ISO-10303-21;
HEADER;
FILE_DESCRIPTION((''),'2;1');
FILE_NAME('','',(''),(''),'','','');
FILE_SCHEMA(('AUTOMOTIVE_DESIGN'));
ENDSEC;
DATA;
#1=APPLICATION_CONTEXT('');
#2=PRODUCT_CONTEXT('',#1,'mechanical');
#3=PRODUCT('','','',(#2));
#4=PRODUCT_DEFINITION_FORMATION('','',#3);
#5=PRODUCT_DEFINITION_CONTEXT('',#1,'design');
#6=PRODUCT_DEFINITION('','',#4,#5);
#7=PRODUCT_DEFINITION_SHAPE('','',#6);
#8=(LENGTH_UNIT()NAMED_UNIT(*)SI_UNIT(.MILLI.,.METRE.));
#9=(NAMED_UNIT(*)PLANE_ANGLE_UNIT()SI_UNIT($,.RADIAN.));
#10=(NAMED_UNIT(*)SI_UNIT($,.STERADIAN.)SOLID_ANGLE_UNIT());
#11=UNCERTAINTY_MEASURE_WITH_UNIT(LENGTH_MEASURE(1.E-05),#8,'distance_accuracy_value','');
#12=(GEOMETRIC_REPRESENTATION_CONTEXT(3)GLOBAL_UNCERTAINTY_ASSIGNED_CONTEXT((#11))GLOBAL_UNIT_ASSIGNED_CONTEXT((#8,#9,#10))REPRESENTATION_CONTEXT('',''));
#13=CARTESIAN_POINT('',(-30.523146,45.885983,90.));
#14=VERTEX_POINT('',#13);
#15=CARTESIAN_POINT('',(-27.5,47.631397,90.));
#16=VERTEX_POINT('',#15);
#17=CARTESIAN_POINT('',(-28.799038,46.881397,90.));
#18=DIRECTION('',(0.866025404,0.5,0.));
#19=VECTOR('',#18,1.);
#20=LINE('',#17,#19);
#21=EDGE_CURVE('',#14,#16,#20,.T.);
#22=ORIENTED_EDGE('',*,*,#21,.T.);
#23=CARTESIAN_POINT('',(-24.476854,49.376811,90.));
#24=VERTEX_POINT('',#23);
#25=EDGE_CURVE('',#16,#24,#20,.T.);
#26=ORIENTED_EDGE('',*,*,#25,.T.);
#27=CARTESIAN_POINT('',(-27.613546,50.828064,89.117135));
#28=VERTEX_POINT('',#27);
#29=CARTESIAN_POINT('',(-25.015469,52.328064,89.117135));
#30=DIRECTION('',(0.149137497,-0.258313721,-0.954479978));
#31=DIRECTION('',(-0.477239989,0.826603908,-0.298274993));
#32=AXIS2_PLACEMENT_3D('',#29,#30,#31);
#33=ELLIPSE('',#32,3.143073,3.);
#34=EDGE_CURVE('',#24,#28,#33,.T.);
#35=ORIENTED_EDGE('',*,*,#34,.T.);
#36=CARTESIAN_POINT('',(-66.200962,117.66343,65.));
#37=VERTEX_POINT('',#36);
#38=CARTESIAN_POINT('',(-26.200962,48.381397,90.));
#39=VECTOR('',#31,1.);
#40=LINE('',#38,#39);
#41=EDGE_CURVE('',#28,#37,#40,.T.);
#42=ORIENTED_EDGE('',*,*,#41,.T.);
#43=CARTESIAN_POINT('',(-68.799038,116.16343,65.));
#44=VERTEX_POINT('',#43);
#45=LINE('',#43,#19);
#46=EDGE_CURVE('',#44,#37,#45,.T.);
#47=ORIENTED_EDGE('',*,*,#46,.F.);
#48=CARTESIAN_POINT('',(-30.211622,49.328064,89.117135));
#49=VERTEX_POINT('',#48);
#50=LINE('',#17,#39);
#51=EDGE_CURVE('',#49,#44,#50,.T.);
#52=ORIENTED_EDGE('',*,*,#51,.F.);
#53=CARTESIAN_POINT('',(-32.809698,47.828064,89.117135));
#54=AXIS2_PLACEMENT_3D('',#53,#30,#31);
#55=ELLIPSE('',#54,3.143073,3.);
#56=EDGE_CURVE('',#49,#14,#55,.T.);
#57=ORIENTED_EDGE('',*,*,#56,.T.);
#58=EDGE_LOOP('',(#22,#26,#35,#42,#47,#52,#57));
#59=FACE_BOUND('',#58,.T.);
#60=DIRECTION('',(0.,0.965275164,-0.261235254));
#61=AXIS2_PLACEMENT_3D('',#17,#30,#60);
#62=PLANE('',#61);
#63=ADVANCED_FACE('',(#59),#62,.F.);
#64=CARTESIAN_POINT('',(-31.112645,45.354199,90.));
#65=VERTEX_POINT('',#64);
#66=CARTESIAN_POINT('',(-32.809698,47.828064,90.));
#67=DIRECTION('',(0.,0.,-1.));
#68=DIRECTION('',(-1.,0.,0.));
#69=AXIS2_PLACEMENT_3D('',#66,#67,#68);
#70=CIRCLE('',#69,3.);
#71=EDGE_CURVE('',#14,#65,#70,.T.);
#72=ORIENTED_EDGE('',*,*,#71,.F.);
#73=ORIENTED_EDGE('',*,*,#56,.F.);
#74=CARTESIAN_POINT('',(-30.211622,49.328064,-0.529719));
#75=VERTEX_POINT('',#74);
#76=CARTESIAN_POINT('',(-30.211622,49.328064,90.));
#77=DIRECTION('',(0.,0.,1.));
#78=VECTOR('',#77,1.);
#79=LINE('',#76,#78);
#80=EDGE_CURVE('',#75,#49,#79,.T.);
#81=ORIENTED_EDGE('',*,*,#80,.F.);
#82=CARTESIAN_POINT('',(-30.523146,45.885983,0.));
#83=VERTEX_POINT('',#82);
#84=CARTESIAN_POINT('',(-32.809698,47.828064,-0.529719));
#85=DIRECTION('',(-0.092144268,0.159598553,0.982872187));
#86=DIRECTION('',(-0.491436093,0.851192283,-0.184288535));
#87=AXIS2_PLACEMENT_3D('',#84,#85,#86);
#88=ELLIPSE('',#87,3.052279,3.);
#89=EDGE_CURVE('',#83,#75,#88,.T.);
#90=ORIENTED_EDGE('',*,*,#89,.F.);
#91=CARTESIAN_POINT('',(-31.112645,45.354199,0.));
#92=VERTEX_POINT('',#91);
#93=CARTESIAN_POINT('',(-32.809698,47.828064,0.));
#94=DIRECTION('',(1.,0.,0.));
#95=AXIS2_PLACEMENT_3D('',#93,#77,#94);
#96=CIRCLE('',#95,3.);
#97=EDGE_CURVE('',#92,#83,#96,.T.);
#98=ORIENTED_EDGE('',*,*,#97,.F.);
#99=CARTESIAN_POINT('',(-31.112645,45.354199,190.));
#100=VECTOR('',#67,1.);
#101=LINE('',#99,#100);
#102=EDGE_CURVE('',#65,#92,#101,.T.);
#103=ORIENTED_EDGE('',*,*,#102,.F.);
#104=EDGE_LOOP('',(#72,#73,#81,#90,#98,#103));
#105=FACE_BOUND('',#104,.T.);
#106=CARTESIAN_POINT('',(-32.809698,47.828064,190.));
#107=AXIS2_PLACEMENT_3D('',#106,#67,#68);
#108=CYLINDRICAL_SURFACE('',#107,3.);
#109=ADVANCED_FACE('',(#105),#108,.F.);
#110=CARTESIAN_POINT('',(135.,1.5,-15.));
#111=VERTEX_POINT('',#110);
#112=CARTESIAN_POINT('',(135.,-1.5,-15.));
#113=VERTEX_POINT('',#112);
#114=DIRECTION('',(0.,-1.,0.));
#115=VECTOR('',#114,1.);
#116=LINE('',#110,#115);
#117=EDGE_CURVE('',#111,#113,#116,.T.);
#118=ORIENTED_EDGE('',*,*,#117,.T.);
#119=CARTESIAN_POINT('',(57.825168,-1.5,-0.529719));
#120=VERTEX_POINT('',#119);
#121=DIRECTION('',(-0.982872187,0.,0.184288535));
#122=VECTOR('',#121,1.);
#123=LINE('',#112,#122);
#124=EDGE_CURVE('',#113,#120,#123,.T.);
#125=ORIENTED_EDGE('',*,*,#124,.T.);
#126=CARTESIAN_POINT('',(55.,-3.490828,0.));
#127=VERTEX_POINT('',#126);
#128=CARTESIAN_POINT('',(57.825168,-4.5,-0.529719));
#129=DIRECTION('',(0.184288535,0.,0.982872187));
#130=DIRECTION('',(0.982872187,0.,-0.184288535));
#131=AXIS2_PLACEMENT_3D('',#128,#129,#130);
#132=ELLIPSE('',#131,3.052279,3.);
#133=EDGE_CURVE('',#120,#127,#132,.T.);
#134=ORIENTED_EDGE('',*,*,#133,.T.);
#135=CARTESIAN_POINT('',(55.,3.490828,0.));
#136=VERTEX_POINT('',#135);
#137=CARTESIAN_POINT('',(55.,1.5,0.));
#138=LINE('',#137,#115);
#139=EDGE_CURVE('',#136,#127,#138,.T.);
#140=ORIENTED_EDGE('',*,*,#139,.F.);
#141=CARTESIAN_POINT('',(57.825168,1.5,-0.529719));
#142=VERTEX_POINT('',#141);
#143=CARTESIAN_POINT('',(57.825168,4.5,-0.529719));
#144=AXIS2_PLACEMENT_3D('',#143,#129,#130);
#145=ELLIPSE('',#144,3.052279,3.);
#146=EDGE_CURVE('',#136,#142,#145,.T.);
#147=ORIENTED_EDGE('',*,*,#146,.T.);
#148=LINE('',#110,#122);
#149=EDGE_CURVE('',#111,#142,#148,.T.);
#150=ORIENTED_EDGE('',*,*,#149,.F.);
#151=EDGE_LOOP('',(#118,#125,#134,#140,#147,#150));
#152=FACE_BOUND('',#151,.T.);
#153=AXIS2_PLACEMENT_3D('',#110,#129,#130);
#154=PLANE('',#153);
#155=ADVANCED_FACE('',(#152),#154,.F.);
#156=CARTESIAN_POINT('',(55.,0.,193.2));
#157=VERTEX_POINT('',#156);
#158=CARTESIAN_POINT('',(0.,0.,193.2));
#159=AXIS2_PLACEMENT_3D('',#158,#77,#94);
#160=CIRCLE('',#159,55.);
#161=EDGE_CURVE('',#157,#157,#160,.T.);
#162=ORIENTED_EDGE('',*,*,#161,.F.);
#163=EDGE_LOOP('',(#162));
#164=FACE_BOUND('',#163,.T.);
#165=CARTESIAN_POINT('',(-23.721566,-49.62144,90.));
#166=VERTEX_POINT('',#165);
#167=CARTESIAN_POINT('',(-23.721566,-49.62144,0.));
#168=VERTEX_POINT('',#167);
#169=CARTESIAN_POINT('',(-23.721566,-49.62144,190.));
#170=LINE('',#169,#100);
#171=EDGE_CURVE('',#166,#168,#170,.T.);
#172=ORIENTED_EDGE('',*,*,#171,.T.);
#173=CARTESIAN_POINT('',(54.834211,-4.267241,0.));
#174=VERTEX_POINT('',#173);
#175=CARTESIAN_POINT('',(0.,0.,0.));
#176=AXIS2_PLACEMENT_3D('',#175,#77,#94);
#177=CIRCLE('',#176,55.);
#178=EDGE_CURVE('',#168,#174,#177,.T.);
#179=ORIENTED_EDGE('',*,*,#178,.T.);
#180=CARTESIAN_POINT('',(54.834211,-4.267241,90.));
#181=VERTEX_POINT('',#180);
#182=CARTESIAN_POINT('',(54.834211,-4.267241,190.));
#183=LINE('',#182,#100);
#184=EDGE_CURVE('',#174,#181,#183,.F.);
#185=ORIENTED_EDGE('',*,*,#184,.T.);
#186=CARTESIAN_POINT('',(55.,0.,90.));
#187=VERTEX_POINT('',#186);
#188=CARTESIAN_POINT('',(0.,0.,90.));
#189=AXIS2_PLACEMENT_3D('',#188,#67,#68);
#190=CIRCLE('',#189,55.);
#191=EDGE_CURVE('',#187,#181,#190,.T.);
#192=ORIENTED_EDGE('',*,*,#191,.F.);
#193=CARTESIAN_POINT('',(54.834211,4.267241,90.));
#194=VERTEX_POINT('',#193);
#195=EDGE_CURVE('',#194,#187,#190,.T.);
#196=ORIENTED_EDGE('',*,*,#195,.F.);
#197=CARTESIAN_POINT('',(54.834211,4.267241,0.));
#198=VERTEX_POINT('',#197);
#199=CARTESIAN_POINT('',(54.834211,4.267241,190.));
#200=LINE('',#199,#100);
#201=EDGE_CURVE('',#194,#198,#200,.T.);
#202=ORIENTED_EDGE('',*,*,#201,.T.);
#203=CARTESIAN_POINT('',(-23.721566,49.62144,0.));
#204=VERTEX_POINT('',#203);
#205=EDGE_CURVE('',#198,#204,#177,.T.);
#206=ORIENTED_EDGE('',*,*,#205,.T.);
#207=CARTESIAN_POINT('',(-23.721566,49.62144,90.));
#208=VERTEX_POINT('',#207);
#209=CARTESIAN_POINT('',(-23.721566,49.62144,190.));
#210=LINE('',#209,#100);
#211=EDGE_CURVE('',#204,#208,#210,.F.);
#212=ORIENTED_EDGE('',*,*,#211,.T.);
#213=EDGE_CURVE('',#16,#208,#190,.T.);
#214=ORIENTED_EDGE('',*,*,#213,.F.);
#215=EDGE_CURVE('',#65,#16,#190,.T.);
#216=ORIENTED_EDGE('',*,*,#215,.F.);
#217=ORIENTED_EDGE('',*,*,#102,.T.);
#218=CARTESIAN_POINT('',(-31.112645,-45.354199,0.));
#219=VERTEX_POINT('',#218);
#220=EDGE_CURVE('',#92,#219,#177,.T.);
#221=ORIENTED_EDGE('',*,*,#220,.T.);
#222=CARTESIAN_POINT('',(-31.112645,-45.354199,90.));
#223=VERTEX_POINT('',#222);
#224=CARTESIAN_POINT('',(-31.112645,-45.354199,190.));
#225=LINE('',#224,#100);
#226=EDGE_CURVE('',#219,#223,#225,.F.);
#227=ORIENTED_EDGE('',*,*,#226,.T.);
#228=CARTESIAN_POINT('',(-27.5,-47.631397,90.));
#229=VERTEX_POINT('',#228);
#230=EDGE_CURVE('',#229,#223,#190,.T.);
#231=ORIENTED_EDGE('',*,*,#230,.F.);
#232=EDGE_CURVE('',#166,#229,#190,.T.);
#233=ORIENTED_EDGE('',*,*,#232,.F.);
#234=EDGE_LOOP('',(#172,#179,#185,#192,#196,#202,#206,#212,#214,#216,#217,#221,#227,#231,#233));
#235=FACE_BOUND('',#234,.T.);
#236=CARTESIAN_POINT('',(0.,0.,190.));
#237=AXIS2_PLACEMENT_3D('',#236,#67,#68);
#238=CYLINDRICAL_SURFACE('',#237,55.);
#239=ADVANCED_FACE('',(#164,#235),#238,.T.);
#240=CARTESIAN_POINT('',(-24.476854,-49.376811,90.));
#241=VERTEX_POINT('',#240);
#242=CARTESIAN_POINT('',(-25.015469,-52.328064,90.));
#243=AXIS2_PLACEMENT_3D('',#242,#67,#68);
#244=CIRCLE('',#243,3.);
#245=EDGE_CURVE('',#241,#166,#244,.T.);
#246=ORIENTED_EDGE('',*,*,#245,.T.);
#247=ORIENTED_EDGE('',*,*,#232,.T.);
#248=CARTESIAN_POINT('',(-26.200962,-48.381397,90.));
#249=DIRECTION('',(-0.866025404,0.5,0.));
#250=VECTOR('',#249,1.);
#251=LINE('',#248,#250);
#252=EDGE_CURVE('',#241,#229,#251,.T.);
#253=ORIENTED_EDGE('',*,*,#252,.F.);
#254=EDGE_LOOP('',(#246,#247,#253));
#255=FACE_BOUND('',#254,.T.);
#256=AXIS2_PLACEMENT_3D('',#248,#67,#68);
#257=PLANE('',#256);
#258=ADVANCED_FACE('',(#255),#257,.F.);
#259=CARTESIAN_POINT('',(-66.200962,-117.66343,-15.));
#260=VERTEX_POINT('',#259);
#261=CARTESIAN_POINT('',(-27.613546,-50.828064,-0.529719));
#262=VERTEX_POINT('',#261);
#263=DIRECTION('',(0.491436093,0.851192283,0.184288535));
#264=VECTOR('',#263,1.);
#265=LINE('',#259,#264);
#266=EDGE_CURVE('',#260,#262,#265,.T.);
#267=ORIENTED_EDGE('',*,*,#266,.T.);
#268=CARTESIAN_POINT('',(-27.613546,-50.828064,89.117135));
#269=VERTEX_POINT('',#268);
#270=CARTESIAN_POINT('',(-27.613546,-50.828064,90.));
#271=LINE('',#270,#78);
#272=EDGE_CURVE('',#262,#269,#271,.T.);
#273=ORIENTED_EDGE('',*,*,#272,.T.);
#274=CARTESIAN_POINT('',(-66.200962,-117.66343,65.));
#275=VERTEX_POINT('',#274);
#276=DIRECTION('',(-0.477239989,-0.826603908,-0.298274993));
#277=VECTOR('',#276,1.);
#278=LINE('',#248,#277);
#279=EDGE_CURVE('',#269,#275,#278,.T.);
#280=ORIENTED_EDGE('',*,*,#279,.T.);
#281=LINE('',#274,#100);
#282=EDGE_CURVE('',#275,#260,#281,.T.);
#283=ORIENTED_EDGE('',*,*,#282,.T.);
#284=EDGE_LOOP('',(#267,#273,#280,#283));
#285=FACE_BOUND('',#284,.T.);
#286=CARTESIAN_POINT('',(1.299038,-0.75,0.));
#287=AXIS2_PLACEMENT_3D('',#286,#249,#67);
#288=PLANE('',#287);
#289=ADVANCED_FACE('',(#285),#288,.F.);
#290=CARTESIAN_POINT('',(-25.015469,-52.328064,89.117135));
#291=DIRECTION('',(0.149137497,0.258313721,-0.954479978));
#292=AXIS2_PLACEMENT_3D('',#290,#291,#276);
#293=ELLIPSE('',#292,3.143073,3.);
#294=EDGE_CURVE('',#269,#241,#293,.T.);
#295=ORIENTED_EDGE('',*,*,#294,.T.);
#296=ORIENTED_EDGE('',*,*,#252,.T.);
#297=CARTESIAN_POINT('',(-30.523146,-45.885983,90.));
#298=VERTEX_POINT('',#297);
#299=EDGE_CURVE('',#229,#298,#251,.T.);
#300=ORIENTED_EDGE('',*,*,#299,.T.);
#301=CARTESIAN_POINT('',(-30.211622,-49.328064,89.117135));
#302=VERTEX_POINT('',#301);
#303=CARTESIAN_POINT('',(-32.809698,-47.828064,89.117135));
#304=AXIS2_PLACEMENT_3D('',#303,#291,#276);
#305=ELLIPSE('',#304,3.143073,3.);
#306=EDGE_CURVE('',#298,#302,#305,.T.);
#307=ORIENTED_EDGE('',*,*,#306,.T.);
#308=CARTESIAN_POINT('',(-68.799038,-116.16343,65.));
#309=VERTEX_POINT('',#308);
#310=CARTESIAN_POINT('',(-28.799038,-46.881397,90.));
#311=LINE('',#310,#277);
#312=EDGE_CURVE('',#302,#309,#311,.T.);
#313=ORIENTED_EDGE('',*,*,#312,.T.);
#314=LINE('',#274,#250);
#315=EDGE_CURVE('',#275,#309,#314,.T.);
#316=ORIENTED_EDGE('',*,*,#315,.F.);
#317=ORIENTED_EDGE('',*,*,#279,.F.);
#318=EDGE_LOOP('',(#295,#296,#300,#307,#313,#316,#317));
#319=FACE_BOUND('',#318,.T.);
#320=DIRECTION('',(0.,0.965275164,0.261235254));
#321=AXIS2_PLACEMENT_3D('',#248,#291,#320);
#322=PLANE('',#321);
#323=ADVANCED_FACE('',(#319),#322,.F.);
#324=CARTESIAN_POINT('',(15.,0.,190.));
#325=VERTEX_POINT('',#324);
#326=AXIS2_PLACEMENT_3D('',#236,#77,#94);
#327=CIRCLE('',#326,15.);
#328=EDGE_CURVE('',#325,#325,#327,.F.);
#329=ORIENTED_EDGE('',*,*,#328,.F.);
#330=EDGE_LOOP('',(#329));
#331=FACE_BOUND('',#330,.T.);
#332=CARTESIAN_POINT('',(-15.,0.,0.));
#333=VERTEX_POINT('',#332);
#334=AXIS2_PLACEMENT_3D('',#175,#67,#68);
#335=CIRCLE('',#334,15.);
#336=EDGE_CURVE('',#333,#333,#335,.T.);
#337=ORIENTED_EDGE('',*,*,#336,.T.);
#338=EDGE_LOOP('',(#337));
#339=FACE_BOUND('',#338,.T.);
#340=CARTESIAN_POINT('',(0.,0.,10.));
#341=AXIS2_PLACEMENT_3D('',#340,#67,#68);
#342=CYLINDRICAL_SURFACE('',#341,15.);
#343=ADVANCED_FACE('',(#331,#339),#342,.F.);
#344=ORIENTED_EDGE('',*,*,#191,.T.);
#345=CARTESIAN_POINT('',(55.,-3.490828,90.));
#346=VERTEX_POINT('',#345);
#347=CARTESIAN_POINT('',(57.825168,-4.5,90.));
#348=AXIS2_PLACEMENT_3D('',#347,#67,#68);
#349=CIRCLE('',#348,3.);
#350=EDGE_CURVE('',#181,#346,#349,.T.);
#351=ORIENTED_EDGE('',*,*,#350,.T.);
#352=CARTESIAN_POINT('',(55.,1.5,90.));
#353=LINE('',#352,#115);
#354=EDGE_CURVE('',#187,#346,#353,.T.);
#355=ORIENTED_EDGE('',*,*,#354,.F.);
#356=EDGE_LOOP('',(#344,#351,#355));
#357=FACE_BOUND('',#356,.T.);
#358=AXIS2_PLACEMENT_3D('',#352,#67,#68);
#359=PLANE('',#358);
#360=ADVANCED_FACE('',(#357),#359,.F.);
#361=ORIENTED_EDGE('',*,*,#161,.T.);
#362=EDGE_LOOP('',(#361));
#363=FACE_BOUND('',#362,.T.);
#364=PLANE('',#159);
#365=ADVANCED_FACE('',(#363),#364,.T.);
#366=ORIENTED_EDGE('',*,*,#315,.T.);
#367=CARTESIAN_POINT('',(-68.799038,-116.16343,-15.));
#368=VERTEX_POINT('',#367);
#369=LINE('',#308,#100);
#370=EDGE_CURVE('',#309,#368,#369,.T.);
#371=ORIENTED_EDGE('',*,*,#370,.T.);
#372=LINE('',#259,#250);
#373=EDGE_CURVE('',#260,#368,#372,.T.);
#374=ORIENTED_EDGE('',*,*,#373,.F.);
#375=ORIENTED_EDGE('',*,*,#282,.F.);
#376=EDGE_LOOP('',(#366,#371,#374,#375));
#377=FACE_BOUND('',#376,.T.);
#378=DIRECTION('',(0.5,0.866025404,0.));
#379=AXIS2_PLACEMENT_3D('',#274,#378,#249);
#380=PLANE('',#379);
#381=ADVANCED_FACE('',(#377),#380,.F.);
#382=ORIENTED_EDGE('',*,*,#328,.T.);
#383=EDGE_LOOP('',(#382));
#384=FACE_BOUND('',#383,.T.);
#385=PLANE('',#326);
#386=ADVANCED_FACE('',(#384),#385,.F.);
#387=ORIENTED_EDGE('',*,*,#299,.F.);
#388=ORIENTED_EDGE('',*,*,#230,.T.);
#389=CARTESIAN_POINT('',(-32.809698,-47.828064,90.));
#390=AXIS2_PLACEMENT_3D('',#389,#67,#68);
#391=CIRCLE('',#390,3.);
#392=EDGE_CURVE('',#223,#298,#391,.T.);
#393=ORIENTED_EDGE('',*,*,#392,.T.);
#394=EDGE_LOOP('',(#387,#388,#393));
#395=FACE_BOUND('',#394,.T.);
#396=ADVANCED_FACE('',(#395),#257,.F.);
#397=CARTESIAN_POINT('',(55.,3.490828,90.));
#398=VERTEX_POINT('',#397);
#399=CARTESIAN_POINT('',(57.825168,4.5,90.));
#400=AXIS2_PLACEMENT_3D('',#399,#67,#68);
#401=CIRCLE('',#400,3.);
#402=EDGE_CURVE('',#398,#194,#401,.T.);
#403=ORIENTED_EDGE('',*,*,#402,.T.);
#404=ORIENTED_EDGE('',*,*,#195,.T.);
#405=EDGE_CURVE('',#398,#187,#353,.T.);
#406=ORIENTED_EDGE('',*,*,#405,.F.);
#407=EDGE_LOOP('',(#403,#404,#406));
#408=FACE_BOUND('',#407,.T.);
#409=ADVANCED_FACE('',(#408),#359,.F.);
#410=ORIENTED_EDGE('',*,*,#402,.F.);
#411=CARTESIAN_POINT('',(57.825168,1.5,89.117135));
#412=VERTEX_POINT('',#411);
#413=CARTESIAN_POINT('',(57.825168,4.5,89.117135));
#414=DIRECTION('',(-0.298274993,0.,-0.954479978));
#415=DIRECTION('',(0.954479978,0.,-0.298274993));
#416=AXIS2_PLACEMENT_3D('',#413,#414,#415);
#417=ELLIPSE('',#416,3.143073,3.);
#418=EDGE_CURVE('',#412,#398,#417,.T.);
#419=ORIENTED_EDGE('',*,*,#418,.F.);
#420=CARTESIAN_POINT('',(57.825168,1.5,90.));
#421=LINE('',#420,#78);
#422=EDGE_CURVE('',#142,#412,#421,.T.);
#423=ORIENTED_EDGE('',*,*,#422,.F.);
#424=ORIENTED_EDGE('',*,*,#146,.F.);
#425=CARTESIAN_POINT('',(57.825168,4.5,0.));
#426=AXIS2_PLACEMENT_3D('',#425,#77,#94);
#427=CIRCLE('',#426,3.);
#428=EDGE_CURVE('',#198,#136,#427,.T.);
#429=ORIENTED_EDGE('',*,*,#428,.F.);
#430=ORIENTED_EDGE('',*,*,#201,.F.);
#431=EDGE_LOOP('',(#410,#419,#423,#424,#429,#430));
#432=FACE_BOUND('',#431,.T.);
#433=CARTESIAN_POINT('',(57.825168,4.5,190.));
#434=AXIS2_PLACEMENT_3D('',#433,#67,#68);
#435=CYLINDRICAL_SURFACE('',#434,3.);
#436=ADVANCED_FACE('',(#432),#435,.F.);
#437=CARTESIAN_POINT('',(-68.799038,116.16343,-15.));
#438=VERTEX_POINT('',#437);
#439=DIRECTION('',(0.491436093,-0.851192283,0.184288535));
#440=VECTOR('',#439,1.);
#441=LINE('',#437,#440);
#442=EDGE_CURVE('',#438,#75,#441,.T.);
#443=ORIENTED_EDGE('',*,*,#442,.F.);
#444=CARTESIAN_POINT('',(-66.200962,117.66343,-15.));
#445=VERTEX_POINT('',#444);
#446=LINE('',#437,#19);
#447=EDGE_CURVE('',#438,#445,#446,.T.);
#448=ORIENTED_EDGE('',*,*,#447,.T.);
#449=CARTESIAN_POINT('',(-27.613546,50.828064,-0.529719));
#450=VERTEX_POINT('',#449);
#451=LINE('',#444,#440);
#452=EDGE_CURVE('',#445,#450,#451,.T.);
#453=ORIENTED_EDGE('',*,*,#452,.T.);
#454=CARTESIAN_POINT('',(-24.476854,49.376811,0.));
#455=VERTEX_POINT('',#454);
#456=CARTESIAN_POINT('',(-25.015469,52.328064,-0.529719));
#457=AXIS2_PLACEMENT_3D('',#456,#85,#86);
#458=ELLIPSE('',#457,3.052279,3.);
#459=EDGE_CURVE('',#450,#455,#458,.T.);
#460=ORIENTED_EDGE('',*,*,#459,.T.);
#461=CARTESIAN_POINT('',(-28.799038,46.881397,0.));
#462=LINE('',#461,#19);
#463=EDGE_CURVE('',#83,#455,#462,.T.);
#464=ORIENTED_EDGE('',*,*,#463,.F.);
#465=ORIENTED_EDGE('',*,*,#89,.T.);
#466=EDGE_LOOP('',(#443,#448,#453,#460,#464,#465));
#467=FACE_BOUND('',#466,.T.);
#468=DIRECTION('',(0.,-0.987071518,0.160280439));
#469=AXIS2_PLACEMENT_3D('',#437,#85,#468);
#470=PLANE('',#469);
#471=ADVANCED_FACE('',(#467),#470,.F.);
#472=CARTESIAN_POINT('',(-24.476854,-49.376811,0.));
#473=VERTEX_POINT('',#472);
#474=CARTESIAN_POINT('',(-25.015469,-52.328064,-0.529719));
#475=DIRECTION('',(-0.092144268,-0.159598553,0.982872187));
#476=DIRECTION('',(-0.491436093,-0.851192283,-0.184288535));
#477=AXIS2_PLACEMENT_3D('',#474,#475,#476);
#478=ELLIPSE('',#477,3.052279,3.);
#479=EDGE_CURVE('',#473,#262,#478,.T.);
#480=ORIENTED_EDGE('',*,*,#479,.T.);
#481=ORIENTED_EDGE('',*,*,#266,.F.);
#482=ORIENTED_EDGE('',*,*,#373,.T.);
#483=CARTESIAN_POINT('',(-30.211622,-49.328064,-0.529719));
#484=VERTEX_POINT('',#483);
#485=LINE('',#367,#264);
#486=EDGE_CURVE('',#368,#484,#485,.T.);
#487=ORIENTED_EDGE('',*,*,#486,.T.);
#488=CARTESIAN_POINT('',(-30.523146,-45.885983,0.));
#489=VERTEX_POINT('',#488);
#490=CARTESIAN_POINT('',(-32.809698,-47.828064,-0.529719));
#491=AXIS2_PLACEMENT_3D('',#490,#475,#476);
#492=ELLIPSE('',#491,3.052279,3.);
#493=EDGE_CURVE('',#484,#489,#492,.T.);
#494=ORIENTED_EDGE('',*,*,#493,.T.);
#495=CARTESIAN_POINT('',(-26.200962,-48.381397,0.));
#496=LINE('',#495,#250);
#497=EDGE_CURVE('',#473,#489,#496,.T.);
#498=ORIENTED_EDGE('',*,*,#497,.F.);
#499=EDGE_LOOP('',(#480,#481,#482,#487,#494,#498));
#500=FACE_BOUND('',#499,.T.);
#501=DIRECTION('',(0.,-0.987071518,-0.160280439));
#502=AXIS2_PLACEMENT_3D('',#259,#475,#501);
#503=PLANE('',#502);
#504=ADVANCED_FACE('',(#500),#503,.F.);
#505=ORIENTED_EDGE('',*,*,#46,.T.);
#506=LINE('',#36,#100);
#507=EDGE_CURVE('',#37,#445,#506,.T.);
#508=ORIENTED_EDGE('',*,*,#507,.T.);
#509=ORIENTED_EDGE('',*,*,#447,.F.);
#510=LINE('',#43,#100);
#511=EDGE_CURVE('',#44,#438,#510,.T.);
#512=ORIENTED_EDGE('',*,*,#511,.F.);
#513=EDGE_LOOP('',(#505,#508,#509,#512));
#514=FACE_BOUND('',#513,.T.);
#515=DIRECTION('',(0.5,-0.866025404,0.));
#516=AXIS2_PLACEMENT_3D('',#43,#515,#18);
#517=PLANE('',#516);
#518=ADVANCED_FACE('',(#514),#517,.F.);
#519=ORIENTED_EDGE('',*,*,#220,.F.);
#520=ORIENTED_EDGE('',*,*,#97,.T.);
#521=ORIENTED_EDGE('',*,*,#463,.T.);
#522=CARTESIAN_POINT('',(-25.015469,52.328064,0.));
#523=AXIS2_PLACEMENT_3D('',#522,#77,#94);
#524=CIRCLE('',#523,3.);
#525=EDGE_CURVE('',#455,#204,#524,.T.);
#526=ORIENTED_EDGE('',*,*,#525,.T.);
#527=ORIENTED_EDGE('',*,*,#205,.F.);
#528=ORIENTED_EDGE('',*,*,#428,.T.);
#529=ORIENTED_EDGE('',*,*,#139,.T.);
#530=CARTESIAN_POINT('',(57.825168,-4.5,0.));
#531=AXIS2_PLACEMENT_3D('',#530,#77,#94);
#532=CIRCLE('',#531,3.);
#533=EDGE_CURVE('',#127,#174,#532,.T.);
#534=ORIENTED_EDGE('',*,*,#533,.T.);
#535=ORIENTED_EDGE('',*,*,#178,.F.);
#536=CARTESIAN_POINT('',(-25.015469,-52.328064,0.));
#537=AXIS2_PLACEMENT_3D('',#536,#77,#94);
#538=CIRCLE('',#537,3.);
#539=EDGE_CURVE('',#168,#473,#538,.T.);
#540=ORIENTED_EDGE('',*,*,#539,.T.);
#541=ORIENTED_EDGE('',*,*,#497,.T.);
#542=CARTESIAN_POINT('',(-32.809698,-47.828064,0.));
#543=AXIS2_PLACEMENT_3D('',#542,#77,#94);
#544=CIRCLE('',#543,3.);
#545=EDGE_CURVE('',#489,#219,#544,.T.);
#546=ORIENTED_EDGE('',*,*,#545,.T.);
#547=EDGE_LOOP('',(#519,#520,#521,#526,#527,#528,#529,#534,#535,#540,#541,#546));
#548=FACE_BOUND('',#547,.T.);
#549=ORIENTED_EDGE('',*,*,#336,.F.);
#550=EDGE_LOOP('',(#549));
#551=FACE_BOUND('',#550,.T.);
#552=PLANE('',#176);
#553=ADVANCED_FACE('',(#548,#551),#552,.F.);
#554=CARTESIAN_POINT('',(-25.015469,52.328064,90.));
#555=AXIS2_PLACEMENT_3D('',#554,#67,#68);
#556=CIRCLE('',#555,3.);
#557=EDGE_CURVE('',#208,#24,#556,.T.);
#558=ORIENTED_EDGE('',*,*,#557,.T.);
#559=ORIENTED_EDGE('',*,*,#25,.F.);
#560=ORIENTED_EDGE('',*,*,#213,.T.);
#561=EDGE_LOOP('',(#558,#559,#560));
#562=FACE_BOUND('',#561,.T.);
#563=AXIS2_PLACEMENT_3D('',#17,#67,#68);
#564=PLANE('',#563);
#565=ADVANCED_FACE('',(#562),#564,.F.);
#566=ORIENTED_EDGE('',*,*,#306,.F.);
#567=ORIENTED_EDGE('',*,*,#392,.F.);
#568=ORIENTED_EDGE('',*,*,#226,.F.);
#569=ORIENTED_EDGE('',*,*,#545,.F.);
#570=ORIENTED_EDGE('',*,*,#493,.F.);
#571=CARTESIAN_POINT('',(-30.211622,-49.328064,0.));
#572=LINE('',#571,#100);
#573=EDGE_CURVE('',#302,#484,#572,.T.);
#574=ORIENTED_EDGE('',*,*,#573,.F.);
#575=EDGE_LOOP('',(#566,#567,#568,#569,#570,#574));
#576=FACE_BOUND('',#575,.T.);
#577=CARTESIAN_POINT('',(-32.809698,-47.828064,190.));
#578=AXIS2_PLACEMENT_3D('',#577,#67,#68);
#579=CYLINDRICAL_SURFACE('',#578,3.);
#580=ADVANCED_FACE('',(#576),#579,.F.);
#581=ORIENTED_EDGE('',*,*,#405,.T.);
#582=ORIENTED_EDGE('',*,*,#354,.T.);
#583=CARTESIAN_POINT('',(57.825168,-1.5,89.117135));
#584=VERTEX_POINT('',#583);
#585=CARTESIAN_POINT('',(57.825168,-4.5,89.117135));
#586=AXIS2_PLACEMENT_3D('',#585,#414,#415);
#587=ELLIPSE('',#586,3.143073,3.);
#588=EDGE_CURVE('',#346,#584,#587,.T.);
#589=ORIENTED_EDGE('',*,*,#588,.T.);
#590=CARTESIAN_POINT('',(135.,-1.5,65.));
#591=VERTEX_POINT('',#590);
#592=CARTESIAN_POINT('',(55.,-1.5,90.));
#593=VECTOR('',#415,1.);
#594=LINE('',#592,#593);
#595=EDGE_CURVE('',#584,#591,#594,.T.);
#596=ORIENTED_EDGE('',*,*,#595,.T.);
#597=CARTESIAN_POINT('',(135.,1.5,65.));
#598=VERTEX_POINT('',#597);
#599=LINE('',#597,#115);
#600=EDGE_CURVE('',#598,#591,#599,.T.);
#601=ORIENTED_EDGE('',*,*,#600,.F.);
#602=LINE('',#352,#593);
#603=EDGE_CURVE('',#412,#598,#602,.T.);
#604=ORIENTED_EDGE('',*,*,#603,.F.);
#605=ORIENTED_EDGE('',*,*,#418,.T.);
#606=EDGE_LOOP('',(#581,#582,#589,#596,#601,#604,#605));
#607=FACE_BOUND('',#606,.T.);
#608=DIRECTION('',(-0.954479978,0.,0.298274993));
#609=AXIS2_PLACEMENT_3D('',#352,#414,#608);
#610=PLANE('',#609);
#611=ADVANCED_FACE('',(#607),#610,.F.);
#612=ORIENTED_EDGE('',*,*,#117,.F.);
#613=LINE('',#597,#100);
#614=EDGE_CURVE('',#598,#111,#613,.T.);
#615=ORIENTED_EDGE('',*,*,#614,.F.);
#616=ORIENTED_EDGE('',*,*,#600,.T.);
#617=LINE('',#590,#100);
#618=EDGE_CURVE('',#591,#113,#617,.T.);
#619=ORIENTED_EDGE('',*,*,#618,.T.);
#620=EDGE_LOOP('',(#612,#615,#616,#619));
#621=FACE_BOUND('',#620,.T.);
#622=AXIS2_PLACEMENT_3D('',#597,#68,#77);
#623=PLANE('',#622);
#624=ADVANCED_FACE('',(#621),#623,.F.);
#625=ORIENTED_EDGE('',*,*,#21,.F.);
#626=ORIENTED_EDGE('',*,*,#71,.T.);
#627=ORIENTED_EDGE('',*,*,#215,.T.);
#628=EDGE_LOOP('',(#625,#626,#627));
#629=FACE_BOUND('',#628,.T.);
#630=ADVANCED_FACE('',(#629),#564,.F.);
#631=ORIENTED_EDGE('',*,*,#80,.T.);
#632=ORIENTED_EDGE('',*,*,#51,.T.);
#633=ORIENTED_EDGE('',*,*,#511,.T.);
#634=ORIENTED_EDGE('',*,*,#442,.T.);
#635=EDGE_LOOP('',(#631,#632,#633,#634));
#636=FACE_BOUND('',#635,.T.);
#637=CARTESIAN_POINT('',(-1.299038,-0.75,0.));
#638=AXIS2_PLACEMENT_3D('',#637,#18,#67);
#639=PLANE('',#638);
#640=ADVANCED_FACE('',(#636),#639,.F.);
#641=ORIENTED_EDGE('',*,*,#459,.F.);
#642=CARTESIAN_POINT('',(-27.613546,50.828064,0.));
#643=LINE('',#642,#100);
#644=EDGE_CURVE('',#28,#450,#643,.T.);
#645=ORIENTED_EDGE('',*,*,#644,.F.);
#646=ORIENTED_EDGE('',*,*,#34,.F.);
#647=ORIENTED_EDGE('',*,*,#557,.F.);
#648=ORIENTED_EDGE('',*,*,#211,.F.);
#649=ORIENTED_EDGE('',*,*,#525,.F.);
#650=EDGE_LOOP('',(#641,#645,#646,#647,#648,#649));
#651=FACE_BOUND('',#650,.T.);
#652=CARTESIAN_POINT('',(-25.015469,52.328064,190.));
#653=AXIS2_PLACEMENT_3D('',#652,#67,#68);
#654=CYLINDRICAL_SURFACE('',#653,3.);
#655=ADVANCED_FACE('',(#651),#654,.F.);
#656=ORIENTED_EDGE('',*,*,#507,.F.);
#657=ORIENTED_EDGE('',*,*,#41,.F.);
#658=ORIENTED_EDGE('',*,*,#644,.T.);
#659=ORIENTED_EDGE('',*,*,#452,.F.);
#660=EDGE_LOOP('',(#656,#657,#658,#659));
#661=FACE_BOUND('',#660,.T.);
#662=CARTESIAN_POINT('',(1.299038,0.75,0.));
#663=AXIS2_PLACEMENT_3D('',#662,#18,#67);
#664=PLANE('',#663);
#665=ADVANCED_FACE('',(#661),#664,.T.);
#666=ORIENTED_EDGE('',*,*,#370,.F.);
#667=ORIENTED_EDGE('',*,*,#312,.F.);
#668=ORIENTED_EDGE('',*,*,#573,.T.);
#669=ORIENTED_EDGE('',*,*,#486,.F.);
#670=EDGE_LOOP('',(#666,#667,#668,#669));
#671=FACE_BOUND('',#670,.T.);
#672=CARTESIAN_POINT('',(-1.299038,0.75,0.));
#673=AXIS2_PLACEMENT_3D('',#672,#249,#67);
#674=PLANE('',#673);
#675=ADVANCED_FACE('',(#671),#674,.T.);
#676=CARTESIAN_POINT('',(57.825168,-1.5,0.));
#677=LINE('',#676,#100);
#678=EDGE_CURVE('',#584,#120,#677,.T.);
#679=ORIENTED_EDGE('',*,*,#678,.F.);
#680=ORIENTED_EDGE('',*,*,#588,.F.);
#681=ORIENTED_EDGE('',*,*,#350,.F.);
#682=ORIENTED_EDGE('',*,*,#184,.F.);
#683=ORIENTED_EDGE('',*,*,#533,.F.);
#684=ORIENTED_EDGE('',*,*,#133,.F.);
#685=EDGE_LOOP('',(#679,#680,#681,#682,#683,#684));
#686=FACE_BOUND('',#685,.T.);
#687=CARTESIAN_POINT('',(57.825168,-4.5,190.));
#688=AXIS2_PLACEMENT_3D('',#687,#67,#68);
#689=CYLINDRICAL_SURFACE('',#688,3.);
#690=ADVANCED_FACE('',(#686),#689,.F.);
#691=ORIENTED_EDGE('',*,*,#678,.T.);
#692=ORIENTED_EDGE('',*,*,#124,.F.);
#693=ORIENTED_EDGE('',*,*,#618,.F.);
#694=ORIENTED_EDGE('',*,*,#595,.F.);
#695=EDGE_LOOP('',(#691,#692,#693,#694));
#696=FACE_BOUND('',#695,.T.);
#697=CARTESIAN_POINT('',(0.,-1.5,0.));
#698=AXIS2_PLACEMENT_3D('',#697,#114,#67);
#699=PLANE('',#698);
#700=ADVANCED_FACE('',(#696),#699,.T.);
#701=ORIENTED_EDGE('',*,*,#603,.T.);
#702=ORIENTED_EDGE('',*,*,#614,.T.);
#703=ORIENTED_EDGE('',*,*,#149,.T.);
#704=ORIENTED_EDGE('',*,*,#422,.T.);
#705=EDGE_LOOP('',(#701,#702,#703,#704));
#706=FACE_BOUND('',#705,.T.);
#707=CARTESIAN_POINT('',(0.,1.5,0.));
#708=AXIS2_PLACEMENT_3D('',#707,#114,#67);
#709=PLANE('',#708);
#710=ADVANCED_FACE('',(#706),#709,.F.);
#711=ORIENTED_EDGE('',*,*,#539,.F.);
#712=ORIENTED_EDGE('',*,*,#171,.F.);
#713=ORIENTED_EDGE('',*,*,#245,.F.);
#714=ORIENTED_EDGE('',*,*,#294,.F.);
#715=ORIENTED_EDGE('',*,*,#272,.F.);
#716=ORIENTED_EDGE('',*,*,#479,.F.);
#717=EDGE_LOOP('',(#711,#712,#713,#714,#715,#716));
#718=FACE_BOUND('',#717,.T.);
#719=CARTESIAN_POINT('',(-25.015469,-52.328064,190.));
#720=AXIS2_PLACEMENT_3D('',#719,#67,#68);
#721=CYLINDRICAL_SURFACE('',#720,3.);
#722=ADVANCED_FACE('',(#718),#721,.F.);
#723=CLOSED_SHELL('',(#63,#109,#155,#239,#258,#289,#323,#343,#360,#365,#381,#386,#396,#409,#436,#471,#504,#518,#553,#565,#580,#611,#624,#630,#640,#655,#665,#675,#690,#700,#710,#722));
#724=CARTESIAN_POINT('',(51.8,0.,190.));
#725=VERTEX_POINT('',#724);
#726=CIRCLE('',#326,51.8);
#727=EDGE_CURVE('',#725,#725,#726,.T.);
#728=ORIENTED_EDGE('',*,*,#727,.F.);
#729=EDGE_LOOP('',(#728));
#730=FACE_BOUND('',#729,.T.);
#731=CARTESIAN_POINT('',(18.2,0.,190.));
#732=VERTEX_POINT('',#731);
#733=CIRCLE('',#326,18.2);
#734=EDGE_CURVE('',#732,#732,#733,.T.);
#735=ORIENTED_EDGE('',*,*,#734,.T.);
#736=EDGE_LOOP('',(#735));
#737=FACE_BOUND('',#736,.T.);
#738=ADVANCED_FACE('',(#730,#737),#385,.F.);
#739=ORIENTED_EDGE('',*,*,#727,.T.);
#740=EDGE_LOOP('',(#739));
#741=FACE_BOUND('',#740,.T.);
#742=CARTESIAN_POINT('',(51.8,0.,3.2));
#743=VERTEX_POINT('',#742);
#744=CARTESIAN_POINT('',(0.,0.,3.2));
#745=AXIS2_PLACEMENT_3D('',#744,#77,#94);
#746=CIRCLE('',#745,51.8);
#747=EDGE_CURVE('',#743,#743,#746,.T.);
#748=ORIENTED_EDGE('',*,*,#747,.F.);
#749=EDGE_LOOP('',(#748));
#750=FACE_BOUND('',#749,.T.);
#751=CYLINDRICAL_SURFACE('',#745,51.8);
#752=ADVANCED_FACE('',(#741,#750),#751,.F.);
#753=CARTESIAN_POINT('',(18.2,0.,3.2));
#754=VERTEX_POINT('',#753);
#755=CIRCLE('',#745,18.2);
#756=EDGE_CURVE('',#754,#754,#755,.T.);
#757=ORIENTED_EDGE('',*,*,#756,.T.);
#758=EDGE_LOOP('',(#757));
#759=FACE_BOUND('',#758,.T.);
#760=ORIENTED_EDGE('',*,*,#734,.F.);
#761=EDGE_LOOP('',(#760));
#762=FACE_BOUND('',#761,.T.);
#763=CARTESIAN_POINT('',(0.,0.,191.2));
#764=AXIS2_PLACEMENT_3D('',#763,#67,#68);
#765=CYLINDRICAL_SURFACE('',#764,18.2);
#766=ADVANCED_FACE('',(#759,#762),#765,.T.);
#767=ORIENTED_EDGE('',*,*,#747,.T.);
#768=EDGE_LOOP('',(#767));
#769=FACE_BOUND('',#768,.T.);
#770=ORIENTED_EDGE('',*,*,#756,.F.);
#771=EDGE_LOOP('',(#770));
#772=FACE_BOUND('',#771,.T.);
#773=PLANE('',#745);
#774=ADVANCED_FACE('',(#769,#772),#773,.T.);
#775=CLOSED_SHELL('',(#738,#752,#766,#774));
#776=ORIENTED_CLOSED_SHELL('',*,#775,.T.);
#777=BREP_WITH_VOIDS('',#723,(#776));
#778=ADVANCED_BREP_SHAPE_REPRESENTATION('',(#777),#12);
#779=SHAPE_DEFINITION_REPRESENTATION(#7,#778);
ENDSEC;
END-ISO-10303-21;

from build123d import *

# Parameters (mm, degrees)
SKETCH_1_R               = 55
EXTRUDE_1_DEPTH          = 190
SKETCH_2_R               = 51.8
CUT_EXTRUDE_1_DEPTH      = 186.8
SKETCH_3_R               = 15
CUT_EXTRUDE_2_DEPTH      = 10
SKETCH_4_R               = 18.2
SKETCH_4_R_2             = 15
EXTRUDE_2_DEPTH          = 188
SKETCH_5_R               = 55
EXTRUDE_5_DEPTH          = 3.2
EXTRUDE_6_DEPTH          = 1.5
PATTERN_CIRCULAR_1_COUNT = 3
FILLET_1_R               = 3


with BuildPart() as part:
    # 草图1 → 凸台-拉伸1 (new body)
    with BuildSketch(Plane.XY):
        Circle(SKETCH_1_R)
    extrude(amount=EXTRUDE_1_DEPTH)

    # 草图2 → 切除-拉伸1 (cut)
    with BuildSketch(Plane.XY.offset(190)):
        Circle(SKETCH_2_R)
    extrude(amount=-CUT_EXTRUDE_1_DEPTH, mode=Mode.SUBTRACT)

    # 草图3 → 切除-拉伸2 (cut)
    with BuildSketch(Plane(origin=(0, 0, 0), x_dir=(-1, 0, 0), z_dir=(0, 0, -1))):
        Circle(SKETCH_3_R)
    extrude(amount=-CUT_EXTRUDE_2_DEPTH, mode=Mode.SUBTRACT)

    # 草图4 → 凸台-拉伸2 (add)
    with BuildSketch(Plane.XY.offset(3.2)):
        Circle(SKETCH_4_R)
        with Locations(Location((0, 0, 0), (0, 0, 180))):
            Circle(SKETCH_4_R_2, mode=Mode.SUBTRACT)
    extrude(amount=EXTRUDE_2_DEPTH)

    # 草图5 → 凸台-拉伸5 (add)
    with BuildSketch(Plane.XY.offset(190)):
        Circle(SKETCH_5_R)
    extrude(amount=EXTRUDE_5_DEPTH)

    # 草图8 → 凸台-拉伸6 (add, symmetric)
    with BuildSketch(Plane(origin=(0, 0, 0), x_dir=(-1, 0, 0), z_dir=(0, 1, 0))):
        Polygon((-55, 90), (-135, 65), (-135, -15), (-55, 0), (-53, 0), (-53, 90), align=None)
    extrude_6 = extrude(amount=EXTRUDE_6_DEPTH, both=True)

    # 阵列(圆周)1: 凸台-拉伸6 ×3 about axis
    pattern_circular_1_axis = Axis((0, 0, 0), (0, 0, 1))
    for i in range(1, PATTERN_CIRCULAR_1_COUNT):
        add(extrude_6.rotate(pattern_circular_1_axis, i * 360 / PATTERN_CIRCULAR_1_COUNT))

    # 圆角1
    # the kernel refuses this fillet: 3 mm, written as the material it adds along each edge
    with BuildSketch(Plane(origin=(-28.78880893, -46.863679757, 90), x_dir=(-0.5000000000000001, -0.8660254037844386, 0), z_dir=(0, 0, -1))) as fillet_1_piece_1_section:
        with BuildLine():
            CenterArc((2.845625882, 3), FILLET_1_R, 184.449834226, 85.550165774)
            ThreePointArc((-0.14533106, 2.767241379), (-0.055235086, 1.384536108), (0, 0))
            Line((0, 0), (2.845625882, 0))
        make_face()
    fillet_1_piece_1 = extrude(amount=90, mode=Mode.PRIVATE)
    fillet_1_piece_1 = split(fillet_1_piece_1, bisect_by=Plane(origin=(-36.031072916, -58.160902251, 85.817388964), z_dir=(0.14913749656797354, 0.25831372136935893, -0.9544799780350298)), keep=Keep.TOP, mode=Mode.PRIVATE)
    fillet_1_piece_1 = split(fillet_1_piece_1, bisect_by=Plane(origin=(-25.561501862, -40.027073251, 1.416522524), z_dir=(-0.09214426752509275, -0.15959855297967937, 0.982872186934322)), keep=Keep.TOP, mode=Mode.PRIVATE)
    add(fillet_1_piece_1)
    with BuildSketch(Plane(origin=(-28.78880893, -46.863679757, 90), x_dir=(-0.5000000000000001, -0.8660254037844386, 0), z_dir=(0, 0, -1))) as fillet_1_piece_2_section:
        with BuildLine():
            CenterArc((2.845625882, 3), FILLET_1_R, 184.449834226, 85.550165774)
            ThreePointArc((-0.14533106, 2.767241379), (-0.055235086, 1.384536108), (0, 0))
            Line((0, 0), (2.845625882, 0))
        make_face()
    fillet_1_piece_2 = extrude(amount=90, mode=Mode.PRIVATE)
    fillet_1_piece_2 = split(fillet_1_piece_2, bisect_by=Plane(origin=(-30.206894917, -45.938881036, 0.021058977), z_dir=(0.09214426752509275, 0.15959855297967937, -0.982872186934322)), keep=Keep.TOP, mode=Mode.PRIVATE)
    add(fillet_1_piece_2)
    with BuildSketch(Plane(origin=(-28.78880893, -46.863679757, 90), x_dir=(-0.5000000000000001, -0.8660254037844386, 0), z_dir=(0, 0, -1))) as fillet_1_piece_3_section:
        with BuildLine():
            CenterArc((2.845625882, 3), FILLET_1_R, 184.449834226, 85.550165774)
            ThreePointArc((-0.14533106, 2.767241379), (-0.055235086, 1.384536108), (0, 0))
            Line((0, 0), (2.845625882, 0))
        make_face()
    fillet_1_piece_3 = extrude(amount=97.114064704, mode=Mode.PRIVATE)
    fillet_1_piece_3 = split(fillet_1_piece_3, bisect_by=Plane(origin=(-29.644971354, -47.826469744, 0), z_dir=(0, 0, -1)), keep=Keep.TOP, mode=Mode.PRIVATE)
    fillet_1_piece_3 = split(fillet_1_piece_3, bisect_by=Plane(origin=(-29.634430967, -47.808213257, -0.228814251), z_dir=(-0.09214426752509275, -0.15959855297967937, 0.982872186934322)), keep=Keep.TOP, mode=Mode.PRIVATE)
    add(fillet_1_piece_3)
    with BuildSketch(Plane(origin=(-26.190732719, -48.363679757, 90), x_dir=(-0.5000000000000023, -0.8660254037844373, 0), z_dir=(0, 0, -1))) as fillet_1_piece_4_section:
        with BuildLine():
            CenterArc((2.845625882, -3), FILLET_1_R, 90, 85.550165774)
            ThreePointArc((-0.14533106, -2.767241379), (-0.055235086, -1.384536108), (0, 0))
            Line((0, 0), (2.845625882, 0))
        make_face()
    fillet_1_piece_4 = extrude(amount=90, mode=Mode.PRIVATE)
    fillet_1_piece_4 = split(fillet_1_piece_4, bisect_by=Plane(origin=(-21.883711344, -42.150446597, 1.416522524), z_dir=(-0.09214426752509275, -0.15959855297967937, 0.982872186934322)), keep=Keep.TOP, mode=Mode.PRIVATE)
    fillet_1_piece_4 = split(fillet_1_piece_4, bisect_by=Plane(origin=(-32.353282398, -60.284275597, 85.817388964), z_dir=(0.14913749656797354, 0.25831372136935893, -0.9544799780350298)), keep=Keep.TOP, mode=Mode.PRIVATE)
    add(fillet_1_piece_4)
    with BuildSketch(Plane(origin=(-26.190732719, -48.363679757, 90), x_dir=(-0.5000000000000023, -0.8660254037844373, 0), z_dir=(0, 0, -1))) as fillet_1_piece_5_section:
        with BuildLine():
            CenterArc((2.845625882, -3), FILLET_1_R, 90, 85.550165774)
            ThreePointArc((-0.14533106, -2.767241379), (-0.055235086, -1.384536108), (0, 0))
            Line((0, 0), (2.845625882, 0))
        make_face()
    fillet_1_piece_5 = extrude(amount=90, mode=Mode.PRIVATE)
    fillet_1_piece_5 = split(fillet_1_piece_5, bisect_by=Plane(origin=(-24.68079054, -49.129378886, 0.021058977), z_dir=(0.09214426752509275, 0.15959855297967937, -0.982872186934322)), keep=Keep.TOP, mode=Mode.PRIVATE)
    add(fillet_1_piece_5)
    with BuildSketch(Plane(origin=(-26.190732719, -48.363679757, 90), x_dir=(-0.5000000000000023, -0.8660254037844373, 0), z_dir=(0, 0, -1))) as fillet_1_piece_6_section:
        with BuildLine():
            CenterArc((2.845625882, -3), FILLET_1_R, 90, 85.550165774)
            ThreePointArc((-0.14533106, -2.767241379), (-0.055235086, -1.384536108), (0, 0))
            Line((0, 0), (2.845625882, 0))
        make_face()
    fillet_1_piece_6 = extrude(amount=97.114064704, mode=Mode.PRIVATE)
    fillet_1_piece_6 = split(fillet_1_piece_6, bisect_by=Plane(origin=(-26.596452095, -49.58653316, 0), z_dir=(0, 0, -1)), keep=Keep.TOP, mode=Mode.PRIVATE)
    fillet_1_piece_6 = split(fillet_1_piece_6, bisect_by=Plane(origin=(-26.585911707, -49.568276672, -0.228814251), z_dir=(-0.09214426752509275, -0.15959855297967937, 0.982872186934322)), keep=Keep.TOP, mode=Mode.PRIVATE)
    add(fillet_1_piece_6)
    with BuildSketch(Plane(origin=(54.97954165, -1.5, 90), x_dir=(1, 0, 0), z_dir=(0, 0, -1))) as fillet_1_piece_7_section:
        with BuildLine():
            CenterArc((2.845625882, 3), FILLET_1_R, 184.449834226, 85.550165774)
            ThreePointArc((-0.14533106, 2.767241379), (-0.055235086, 1.384536108), (0, 0))
            Line((0, 0), (2.845625882, 0))
        make_face()
    fillet_1_piece_7 = extrude(amount=90, mode=Mode.PRIVATE)
    fillet_1_piece_7 = split(fillet_1_piece_7, bisect_by=Plane(origin=(47.445213206, -2.123373346, 1.416522524), z_dir=(0.1842885350501853, 0, 0.9828721869343219)), keep=Keep.TOP, mode=Mode.PRIVATE)
    fillet_1_piece_7 = split(fillet_1_piece_7, bisect_by=Plane(origin=(68.384355315, -2.123373346, 85.817388964), z_dir=(-0.2982749931359468, 0, -0.9544799780350298)), keep=Keep.TOP, mode=Mode.PRIVATE)
    add(fillet_1_piece_7)
    with BuildSketch(Plane(origin=(54.97954165, -1.5, 90), x_dir=(1, 0, 0), z_dir=(0, 0, -1))) as fillet_1_piece_8_section:
        with BuildLine():
            CenterArc((2.845625882, 3), FILLET_1_R, 184.449834226, 85.550165774)
            ThreePointArc((-0.14533106, 2.767241379), (-0.055235086, 1.384536108), (0, 0))
            Line((0, 0), (2.845625882, 0))
        make_face()
    fillet_1_piece_8 = extrude(amount=90, mode=Mode.PRIVATE)
    fillet_1_piece_8 = split(fillet_1_piece_8, bisect_by=Plane(origin=(54.887685457, -3.19049785, 0.021058977), z_dir=(-0.1842885350501853, 0, -0.9828721869343219)), keep=Keep.TOP, mode=Mode.PRIVATE)
    add(fillet_1_piece_8)
    with BuildSketch(Plane(origin=(54.97954165, -1.5, 90), x_dir=(1, 0, 0), z_dir=(0, 0, -1))) as fillet_1_piece_9_section:
        with BuildLine():
            CenterArc((2.845625882, 3), FILLET_1_R, 184.449834226, 85.550165774)
            ThreePointArc((-0.14533106, 2.767241379), (-0.055235086, 1.384536108), (0, 0))
            Line((0, 0), (2.845625882, 0))
        make_face()
    fillet_1_piece_9 = extrude(amount=97.114064704, mode=Mode.PRIVATE)
    fillet_1_piece_9 = split(fillet_1_piece_9, bisect_by=Plane(origin=(56.241423449, -1.760063415, 0), z_dir=(0, 0, -1)), keep=Keep.TOP, mode=Mode.PRIVATE)
    fillet_1_piece_9 = split(fillet_1_piece_9, bisect_by=Plane(origin=(56.220342674, -1.760063415, -0.228814251), z_dir=(0.1842885350501853, 0, 0.9828721869343219)), keep=Keep.TOP, mode=Mode.PRIVATE)
    add(fillet_1_piece_9)
    with BuildSketch(Plane(origin=(54.97954165, 1.5, 90), x_dir=(-0.052446111063003654, 0.9986237556929872, 0), z_dir=(0, 0, -1))) as fillet_1_piece_10_section:
        with BuildLine():
            CenterArc((2.846629256, 2.999047938), FILLET_1_R, 183.006320086, 85.550165774)
            Line((-0.149242011, 2.841709605), (0, 0))
            ThreePointArc((0, 0), (1.385527514, 0.017454465), (2.771055028, 0))
        make_face()
    fillet_1_piece_10 = extrude(amount=90, mode=Mode.PRIVATE)
    fillet_1_piece_10 = split(fillet_1_piece_10, bisect_by=Plane(origin=(68.384355315, 2.123373346, 85.817388964), z_dir=(-0.2982749931359468, 0, -0.9544799780350298)), keep=Keep.TOP, mode=Mode.PRIVATE)
    fillet_1_piece_10 = split(fillet_1_piece_10, bisect_by=Plane(origin=(47.445213206, 2.123373346, 1.416522524), z_dir=(0.1842885350501853, 0, 0.9828721869343219)), keep=Keep.TOP, mode=Mode.PRIVATE)
    add(fillet_1_piece_10)
    with BuildSketch(Plane(origin=(54.97954165, 1.5, 90), x_dir=(-0.052446111063003654, 0.9986237556929872, 0), z_dir=(0, 0, -1))) as fillet_1_piece_11_section:
        with BuildLine():
            CenterArc((2.846629256, 2.999047938), FILLET_1_R, 183.006320086, 85.550165774)
            Line((-0.149242011, 2.841709605), (0, 0))
            ThreePointArc((0, 0), (1.385527514, 0.017454465), (2.771055028, 0))
        make_face()
    fillet_1_piece_11 = extrude(amount=97.114064704, mode=Mode.PRIVATE)
    fillet_1_piece_11 = split(fillet_1_piece_11, bisect_by=Plane(origin=(56.241423446, 1.760063423, 0), z_dir=(0, 0, -1)), keep=Keep.TOP, mode=Mode.PRIVATE)
    fillet_1_piece_11 = split(fillet_1_piece_11, bisect_by=Plane(origin=(56.220342671, 1.760063423, -0.228814251), z_dir=(0.1842885350501853, 0, 0.9828721869343219)), keep=Keep.TOP, mode=Mode.PRIVATE)
    add(fillet_1_piece_11)
    with BuildSketch(Plane(origin=(54.97954165, 1.5, 90), x_dir=(-0.052446111063003654, 0.9986237556929872, 0), z_dir=(0, 0, -1))) as fillet_1_piece_12_section:
        with BuildLine():
            CenterArc((2.846629256, 2.999047938), FILLET_1_R, 183.006320086, 85.550165774)
            Line((-0.149242011, 2.841709605), (0, 0))
            ThreePointArc((0, 0), (1.385527514, 0.017454465), (2.771055028, 0))
        make_face()
    fillet_1_piece_12 = extrude(amount=90, mode=Mode.PRIVATE)
    fillet_1_piece_12 = split(fillet_1_piece_12, bisect_by=Plane(origin=(54.887685455, 3.190497829, 0.021058977), z_dir=(-0.1842885350501853, 0, -0.9828721869343219)), keep=Keep.TOP, mode=Mode.PRIVATE)
    add(fillet_1_piece_12)
    with BuildSketch(Plane(origin=(-26.190732719, 48.363679757, 90), x_dir=(-0.5000000000000009, 0.866025403784438, 0), z_dir=(0, 0, -1))) as fillet_1_piece_13_section:
        with BuildLine():
            CenterArc((2.845625882, 3), FILLET_1_R, 184.449834226, 85.550165774)
            ThreePointArc((-0.14533106, 2.767241379), (-0.055235086, 1.384536108), (0, 0))
            Line((0, 0), (2.845625882, 0))
        make_face()
    fillet_1_piece_13 = extrude(amount=90, mode=Mode.PRIVATE)
    fillet_1_piece_13 = split(fillet_1_piece_13, bisect_by=Plane(origin=(-32.353282398, 60.284275597, 85.817388964), z_dir=(0.14913749656797334, -0.25831372136935904, -0.9544799780350298)), keep=Keep.TOP, mode=Mode.PRIVATE)
    fillet_1_piece_13 = split(fillet_1_piece_13, bisect_by=Plane(origin=(-21.883711344, 42.150446597, 1.416522524), z_dir=(-0.09214426752509264, 0.15959855297967945, 0.982872186934322)), keep=Keep.TOP, mode=Mode.PRIVATE)
    add(fillet_1_piece_13)
    with BuildSketch(Plane(origin=(-26.190732719, 48.363679757, 90), x_dir=(-0.5000000000000009, 0.866025403784438, 0), z_dir=(0, 0, -1))) as fillet_1_piece_14_section:
        with BuildLine():
            CenterArc((2.845625882, 3), FILLET_1_R, 184.449834226, 85.550165774)
            ThreePointArc((-0.14533106, 2.767241379), (-0.055235086, 1.384536108), (0, 0))
            Line((0, 0), (2.845625882, 0))
        make_face()
    fillet_1_piece_14 = extrude(amount=90, mode=Mode.PRIVATE)
    fillet_1_piece_14 = split(fillet_1_piece_14, bisect_by=Plane(origin=(-24.68079054, 49.129378886, 0.021058977), z_dir=(0.09214426752509264, -0.15959855297967945, -0.982872186934322)), keep=Keep.TOP, mode=Mode.PRIVATE)
    add(fillet_1_piece_14)
    with BuildSketch(Plane(origin=(-26.190732719, 48.363679757, 90), x_dir=(-0.5000000000000009, 0.866025403784438, 0), z_dir=(0, 0, -1))) as fillet_1_piece_15_section:
        with BuildLine():
            CenterArc((2.845625882, 3), FILLET_1_R, 184.449834226, 85.550165774)
            ThreePointArc((-0.14533106, 2.767241379), (-0.055235086, 1.384536108), (0, 0))
            Line((0, 0), (2.845625882, 0))
        make_face()
    fillet_1_piece_15 = extrude(amount=97.114064704, mode=Mode.PRIVATE)
    fillet_1_piece_15 = split(fillet_1_piece_15, bisect_by=Plane(origin=(-26.596452095, 49.58653316, 0), z_dir=(0, 0, -1)), keep=Keep.TOP, mode=Mode.PRIVATE)
    fillet_1_piece_15 = split(fillet_1_piece_15, bisect_by=Plane(origin=(-26.585911707, 49.568276672, -0.228814251), z_dir=(-0.09214426752509264, 0.15959855297967945, 0.982872186934322)), keep=Keep.TOP, mode=Mode.PRIVATE)
    add(fillet_1_piece_15)
    with BuildSketch(Plane(origin=(-28.78880893, 46.863679757, 90), x_dir=(-0.5000000000000001, 0.8660254037844386, 0), z_dir=(0, 0, -1))) as fillet_1_piece_16_section:
        with BuildLine():
            CenterArc((2.845625882, -3), FILLET_1_R, 90, 85.550165774)
            ThreePointArc((-0.14533106, -2.767241379), (-0.055235086, -1.384536108), (0, 0))
            Line((0, 0), (2.845625882, 0))
        make_face()
    fillet_1_piece_16 = extrude(amount=90, mode=Mode.PRIVATE)
    fillet_1_piece_16 = split(fillet_1_piece_16, bisect_by=Plane(origin=(-25.561501862, 40.027073251, 1.416522524), z_dir=(-0.09214426752509264, 0.15959855297967945, 0.982872186934322)), keep=Keep.TOP, mode=Mode.PRIVATE)
    fillet_1_piece_16 = split(fillet_1_piece_16, bisect_by=Plane(origin=(-36.031072916, 58.160902251, 85.817388964), z_dir=(0.14913749656797334, -0.25831372136935904, -0.9544799780350298)), keep=Keep.TOP, mode=Mode.PRIVATE)
    add(fillet_1_piece_16)
    with BuildSketch(Plane(origin=(-28.78880893, 46.863679757, 90), x_dir=(-0.5000000000000001, 0.8660254037844386, 0), z_dir=(0, 0, -1))) as fillet_1_piece_17_section:
        with BuildLine():
            CenterArc((2.845625882, -3), FILLET_1_R, 90, 85.550165774)
            ThreePointArc((-0.14533106, -2.767241379), (-0.055235086, -1.384536108), (0, 0))
            Line((0, 0), (2.845625882, 0))
        make_face()
    fillet_1_piece_17 = extrude(amount=90, mode=Mode.PRIVATE)
    fillet_1_piece_17 = split(fillet_1_piece_17, bisect_by=Plane(origin=(-30.206894917, 45.938881036, 0.021058977), z_dir=(0.09214426752509264, -0.15959855297967945, -0.982872186934322)), keep=Keep.TOP, mode=Mode.PRIVATE)
    add(fillet_1_piece_17)
    with BuildSketch(Plane(origin=(-28.78880893, 46.863679757, 90), x_dir=(-0.5000000000000001, 0.8660254037844386, 0), z_dir=(0, 0, -1))) as fillet_1_piece_18_section:
        with BuildLine():
            CenterArc((2.845625882, -3), FILLET_1_R, 90, 85.550165774)
            ThreePointArc((-0.14533106, -2.767241379), (-0.055235086, -1.384536108), (0, 0))
            Line((0, 0), (2.845625882, 0))
        make_face()
    fillet_1_piece_18 = extrude(amount=97.114064704, mode=Mode.PRIVATE)
    fillet_1_piece_18 = split(fillet_1_piece_18, bisect_by=Plane(origin=(-29.644971354, 47.826469744, 0), z_dir=(0, 0, -1)), keep=Keep.TOP, mode=Mode.PRIVATE)
    fillet_1_piece_18 = split(fillet_1_piece_18, bisect_by=Plane(origin=(-29.634430967, 47.808213257, -0.228814251), z_dir=(-0.09214426752509264, 0.15959855297967945, 0.982872186934322)), keep=Keep.TOP, mode=Mode.PRIVATE)
    add(fillet_1_piece_18)


solid = part.part
